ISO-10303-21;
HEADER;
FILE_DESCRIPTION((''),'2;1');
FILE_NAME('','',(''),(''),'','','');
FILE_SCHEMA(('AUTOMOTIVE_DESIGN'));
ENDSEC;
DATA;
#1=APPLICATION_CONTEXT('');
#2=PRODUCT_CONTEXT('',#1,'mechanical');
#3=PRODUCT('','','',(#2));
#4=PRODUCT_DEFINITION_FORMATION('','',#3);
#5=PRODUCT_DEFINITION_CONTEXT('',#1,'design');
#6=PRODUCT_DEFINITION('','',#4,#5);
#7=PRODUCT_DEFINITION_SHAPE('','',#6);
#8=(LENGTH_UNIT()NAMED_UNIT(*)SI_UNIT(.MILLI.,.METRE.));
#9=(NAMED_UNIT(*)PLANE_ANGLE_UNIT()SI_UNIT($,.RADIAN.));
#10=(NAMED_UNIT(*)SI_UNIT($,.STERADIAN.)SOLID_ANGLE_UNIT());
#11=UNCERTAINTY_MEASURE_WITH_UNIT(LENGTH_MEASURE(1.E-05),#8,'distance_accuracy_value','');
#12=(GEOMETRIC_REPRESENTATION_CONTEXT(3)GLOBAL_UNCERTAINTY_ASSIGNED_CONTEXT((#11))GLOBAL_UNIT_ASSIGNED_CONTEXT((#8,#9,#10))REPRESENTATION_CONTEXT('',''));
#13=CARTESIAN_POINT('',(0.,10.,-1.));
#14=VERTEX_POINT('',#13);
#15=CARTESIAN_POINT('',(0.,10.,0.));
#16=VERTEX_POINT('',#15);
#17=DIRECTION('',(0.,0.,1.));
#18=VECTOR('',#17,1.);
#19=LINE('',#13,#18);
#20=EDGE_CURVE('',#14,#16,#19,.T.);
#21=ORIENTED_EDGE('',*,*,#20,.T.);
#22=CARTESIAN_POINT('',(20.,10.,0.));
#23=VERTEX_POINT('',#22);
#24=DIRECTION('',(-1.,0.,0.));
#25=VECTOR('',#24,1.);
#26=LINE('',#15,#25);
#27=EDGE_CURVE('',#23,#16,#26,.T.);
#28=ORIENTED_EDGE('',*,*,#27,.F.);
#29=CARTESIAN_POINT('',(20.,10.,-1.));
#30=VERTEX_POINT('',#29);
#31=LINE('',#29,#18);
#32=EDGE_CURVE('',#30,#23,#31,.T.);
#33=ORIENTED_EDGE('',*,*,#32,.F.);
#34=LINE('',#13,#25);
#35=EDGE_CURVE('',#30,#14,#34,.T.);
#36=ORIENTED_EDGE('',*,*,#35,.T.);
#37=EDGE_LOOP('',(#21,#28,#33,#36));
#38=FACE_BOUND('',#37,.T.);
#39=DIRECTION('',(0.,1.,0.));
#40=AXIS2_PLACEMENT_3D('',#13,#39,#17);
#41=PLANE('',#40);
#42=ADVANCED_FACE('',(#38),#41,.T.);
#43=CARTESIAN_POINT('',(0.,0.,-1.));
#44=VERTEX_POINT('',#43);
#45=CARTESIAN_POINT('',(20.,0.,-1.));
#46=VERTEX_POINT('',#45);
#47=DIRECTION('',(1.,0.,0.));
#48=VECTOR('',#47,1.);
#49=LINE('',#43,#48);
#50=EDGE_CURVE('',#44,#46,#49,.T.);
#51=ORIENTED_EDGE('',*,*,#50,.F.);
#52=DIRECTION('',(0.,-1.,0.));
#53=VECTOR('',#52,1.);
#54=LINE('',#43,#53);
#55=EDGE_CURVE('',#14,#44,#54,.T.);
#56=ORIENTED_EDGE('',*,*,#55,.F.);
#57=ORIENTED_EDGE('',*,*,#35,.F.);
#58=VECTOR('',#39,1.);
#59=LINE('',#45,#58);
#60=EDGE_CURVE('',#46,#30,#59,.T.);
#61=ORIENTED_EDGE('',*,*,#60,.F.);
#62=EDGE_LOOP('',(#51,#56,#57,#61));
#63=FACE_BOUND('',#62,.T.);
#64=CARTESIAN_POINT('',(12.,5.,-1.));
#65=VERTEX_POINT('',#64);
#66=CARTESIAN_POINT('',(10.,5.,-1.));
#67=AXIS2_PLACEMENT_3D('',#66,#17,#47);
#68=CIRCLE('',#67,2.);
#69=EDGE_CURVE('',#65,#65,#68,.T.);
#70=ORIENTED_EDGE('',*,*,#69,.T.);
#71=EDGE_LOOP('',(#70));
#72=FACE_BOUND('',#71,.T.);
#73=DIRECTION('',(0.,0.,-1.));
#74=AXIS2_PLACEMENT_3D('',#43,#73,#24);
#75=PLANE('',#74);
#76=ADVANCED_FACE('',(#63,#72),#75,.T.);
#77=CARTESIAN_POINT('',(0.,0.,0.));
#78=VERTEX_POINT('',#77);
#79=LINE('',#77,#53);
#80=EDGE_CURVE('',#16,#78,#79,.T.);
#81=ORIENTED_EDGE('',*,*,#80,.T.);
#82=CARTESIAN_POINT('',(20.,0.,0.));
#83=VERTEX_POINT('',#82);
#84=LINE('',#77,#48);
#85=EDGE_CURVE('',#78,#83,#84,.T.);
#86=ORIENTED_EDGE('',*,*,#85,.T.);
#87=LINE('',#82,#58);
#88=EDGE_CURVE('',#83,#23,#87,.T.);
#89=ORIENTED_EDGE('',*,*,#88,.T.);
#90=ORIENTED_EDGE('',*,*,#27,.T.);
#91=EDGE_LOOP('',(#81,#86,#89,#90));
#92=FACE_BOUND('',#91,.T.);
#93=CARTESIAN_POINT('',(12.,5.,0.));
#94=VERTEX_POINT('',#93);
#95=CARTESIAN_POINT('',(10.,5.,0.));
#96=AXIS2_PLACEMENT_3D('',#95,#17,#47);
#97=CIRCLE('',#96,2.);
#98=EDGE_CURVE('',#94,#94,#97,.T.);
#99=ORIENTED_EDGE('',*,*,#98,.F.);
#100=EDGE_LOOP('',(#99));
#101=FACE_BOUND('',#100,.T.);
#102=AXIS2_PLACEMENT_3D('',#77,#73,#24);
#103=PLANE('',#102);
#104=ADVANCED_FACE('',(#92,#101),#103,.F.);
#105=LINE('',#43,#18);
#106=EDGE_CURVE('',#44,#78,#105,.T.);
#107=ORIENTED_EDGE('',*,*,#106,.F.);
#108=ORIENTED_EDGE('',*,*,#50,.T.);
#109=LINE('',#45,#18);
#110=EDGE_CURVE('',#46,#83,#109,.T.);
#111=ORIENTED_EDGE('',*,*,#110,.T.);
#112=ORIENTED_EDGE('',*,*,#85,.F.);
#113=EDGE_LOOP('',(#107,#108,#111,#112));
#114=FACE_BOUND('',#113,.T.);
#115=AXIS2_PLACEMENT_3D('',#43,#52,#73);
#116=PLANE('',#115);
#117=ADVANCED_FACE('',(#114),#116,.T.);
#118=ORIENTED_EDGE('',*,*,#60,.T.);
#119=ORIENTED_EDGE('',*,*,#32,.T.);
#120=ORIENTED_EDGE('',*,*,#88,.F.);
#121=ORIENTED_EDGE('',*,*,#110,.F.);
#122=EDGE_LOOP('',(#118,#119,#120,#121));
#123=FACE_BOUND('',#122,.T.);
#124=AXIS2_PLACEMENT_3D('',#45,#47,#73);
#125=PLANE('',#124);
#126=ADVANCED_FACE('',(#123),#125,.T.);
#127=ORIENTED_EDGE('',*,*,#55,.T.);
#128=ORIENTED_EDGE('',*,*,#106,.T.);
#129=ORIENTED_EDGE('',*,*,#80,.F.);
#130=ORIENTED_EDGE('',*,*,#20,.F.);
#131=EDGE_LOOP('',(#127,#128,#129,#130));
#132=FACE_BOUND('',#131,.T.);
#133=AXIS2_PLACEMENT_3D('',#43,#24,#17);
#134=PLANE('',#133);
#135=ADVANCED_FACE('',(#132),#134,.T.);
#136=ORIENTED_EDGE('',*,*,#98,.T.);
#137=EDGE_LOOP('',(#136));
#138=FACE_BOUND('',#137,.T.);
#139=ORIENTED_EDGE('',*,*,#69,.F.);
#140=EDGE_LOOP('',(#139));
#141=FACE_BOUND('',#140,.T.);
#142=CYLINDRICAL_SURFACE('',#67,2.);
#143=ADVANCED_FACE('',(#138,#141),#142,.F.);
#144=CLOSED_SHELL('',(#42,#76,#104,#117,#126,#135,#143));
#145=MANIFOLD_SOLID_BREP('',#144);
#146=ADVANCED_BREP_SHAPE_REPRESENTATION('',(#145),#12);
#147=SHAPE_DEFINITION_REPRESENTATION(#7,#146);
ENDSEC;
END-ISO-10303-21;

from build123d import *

# Parameters (mm, degrees)
SKETCH_1_W      = 20
SKETCH_1_H      = 10
BASEPLATE_DEPTH = 1
SKETCH_6_R      = 2
NORMALCUT_DEPTH = 23.383029286


# Sheet-metal steps are written as plain solids
with BuildPart() as part:
    # Sketch 1 → BasePlate (new body)
    with BuildSketch(Plane.XY):
        with Locations((10, 5)):
            Rectangle(SKETCH_1_W, SKETCH_1_H)
    extrude(amount=-BASEPLATE_DEPTH)

    # 草图6 → NormalCut (cut, through all)
    with BuildSketch(Plane.XY):
        with Locations((10, 5)):
            Circle(SKETCH_6_R)
    extrude(amount=-NORMALCUT_DEPTH, mode=Mode.SUBTRACT)


solid = part.part
